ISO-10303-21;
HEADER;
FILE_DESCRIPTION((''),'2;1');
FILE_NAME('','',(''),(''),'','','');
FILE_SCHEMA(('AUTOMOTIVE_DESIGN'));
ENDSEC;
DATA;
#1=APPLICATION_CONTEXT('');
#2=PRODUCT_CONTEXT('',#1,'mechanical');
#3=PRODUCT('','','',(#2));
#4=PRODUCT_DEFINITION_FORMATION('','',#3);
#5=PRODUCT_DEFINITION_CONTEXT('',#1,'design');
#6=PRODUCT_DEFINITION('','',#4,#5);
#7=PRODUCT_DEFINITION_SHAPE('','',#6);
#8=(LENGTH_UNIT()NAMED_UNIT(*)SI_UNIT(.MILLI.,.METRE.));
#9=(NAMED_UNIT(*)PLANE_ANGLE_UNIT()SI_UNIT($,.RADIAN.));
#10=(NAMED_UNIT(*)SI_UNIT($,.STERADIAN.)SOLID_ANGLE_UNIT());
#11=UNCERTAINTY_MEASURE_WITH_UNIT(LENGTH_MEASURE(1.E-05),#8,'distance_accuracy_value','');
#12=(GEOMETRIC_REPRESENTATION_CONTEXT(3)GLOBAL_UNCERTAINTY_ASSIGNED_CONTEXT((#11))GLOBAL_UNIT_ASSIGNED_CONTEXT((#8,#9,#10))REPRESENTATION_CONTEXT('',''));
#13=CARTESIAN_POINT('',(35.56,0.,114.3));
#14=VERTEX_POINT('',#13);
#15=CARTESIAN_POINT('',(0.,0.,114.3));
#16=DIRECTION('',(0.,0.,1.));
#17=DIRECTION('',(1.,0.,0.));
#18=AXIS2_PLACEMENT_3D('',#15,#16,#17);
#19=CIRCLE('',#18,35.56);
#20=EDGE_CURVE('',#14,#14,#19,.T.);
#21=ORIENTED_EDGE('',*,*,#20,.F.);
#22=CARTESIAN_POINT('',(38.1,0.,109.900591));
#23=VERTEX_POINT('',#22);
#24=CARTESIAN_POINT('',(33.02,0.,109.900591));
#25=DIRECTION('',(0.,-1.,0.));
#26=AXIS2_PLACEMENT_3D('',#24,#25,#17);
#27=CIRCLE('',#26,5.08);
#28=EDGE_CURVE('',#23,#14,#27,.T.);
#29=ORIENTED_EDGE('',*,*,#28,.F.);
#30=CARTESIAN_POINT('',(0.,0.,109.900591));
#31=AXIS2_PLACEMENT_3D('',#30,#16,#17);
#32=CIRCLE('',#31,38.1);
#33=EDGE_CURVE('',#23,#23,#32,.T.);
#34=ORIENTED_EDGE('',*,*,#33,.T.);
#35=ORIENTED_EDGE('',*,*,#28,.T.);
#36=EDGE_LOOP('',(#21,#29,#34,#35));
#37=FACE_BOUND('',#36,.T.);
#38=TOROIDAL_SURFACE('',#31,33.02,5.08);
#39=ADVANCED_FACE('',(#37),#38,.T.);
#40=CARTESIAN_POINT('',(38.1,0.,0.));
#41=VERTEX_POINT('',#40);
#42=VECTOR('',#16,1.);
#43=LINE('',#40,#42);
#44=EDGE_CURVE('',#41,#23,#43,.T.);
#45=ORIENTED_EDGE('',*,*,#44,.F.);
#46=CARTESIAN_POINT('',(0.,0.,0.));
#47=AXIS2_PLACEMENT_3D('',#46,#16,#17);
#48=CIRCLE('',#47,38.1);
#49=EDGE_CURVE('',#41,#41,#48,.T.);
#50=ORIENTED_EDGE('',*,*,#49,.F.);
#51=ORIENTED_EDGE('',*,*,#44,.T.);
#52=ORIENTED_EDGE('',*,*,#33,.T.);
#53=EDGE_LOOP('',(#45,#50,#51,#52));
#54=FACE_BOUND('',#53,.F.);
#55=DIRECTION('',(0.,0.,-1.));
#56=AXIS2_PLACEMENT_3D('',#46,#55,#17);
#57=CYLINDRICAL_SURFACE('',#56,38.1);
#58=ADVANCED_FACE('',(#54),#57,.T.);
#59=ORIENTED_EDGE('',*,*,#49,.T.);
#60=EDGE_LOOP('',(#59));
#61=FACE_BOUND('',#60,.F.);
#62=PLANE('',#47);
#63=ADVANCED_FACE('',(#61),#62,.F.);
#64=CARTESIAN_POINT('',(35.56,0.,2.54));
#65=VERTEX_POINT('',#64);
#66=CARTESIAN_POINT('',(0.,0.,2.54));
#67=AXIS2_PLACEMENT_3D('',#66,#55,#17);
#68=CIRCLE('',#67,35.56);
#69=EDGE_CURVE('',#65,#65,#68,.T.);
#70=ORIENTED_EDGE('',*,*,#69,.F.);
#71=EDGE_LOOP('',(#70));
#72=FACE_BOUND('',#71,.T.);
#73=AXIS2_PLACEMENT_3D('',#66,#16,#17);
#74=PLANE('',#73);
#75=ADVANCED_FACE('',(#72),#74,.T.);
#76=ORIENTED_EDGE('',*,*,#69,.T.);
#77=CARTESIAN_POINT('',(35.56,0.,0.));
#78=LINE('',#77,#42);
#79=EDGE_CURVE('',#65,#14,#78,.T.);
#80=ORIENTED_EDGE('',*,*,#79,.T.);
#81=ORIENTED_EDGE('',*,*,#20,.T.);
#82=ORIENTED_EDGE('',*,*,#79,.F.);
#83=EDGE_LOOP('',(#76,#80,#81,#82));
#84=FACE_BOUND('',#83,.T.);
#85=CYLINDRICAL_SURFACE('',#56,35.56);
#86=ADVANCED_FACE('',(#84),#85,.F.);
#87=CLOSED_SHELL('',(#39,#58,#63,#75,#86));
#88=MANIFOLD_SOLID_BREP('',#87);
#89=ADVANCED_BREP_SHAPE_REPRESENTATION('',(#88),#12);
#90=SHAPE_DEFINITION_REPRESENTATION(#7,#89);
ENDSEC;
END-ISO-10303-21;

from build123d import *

# Parameters (mm, degrees)
F0_R     = 38.1
F1_DEPTH = 114.3
F2_T     = -2.54


# Not quite as in the source:
# - a fillet or chamfer that OpenCascade refuses, or shapes differently, is made with other operations: its cross-section is extruded or revolved along the edge and cut away or added


with BuildPart() as f1:
    # F0 (on Top) → F1 (new body)
    with BuildSketch(Plane.XY):
        Circle(F0_R)
    extrude(amount=F1_DEPTH)

    # F2
    f2_openings = [f1.faces().sort_by_distance(p)[0] for p in [
        (0, 0, 114.3),
    ]]
    offset(amount=F2_T, openings=f2_openings)

    # F3: fillet of radius 5.08 on 1 edges, made by hand

    # F3_s1 → F3_t2 (revolve, cut)
    with BuildSketch(Plane.XZ):
        with BuildLine():
            ThreePointArc((38.1, 109.9005909488), (37.4194090512, 112.4405909488), (35.56, 114.3))
            Line((35.56, 114.3), (38.1, 114.3))
            Line((38.1, 114.3), (38.1, 109.9005909488))
        make_face()
    revolve(axis=Axis((0, 0, 114.3), (0, 0, 1)), mode=Mode.SUBTRACT)


solid = f1.part
